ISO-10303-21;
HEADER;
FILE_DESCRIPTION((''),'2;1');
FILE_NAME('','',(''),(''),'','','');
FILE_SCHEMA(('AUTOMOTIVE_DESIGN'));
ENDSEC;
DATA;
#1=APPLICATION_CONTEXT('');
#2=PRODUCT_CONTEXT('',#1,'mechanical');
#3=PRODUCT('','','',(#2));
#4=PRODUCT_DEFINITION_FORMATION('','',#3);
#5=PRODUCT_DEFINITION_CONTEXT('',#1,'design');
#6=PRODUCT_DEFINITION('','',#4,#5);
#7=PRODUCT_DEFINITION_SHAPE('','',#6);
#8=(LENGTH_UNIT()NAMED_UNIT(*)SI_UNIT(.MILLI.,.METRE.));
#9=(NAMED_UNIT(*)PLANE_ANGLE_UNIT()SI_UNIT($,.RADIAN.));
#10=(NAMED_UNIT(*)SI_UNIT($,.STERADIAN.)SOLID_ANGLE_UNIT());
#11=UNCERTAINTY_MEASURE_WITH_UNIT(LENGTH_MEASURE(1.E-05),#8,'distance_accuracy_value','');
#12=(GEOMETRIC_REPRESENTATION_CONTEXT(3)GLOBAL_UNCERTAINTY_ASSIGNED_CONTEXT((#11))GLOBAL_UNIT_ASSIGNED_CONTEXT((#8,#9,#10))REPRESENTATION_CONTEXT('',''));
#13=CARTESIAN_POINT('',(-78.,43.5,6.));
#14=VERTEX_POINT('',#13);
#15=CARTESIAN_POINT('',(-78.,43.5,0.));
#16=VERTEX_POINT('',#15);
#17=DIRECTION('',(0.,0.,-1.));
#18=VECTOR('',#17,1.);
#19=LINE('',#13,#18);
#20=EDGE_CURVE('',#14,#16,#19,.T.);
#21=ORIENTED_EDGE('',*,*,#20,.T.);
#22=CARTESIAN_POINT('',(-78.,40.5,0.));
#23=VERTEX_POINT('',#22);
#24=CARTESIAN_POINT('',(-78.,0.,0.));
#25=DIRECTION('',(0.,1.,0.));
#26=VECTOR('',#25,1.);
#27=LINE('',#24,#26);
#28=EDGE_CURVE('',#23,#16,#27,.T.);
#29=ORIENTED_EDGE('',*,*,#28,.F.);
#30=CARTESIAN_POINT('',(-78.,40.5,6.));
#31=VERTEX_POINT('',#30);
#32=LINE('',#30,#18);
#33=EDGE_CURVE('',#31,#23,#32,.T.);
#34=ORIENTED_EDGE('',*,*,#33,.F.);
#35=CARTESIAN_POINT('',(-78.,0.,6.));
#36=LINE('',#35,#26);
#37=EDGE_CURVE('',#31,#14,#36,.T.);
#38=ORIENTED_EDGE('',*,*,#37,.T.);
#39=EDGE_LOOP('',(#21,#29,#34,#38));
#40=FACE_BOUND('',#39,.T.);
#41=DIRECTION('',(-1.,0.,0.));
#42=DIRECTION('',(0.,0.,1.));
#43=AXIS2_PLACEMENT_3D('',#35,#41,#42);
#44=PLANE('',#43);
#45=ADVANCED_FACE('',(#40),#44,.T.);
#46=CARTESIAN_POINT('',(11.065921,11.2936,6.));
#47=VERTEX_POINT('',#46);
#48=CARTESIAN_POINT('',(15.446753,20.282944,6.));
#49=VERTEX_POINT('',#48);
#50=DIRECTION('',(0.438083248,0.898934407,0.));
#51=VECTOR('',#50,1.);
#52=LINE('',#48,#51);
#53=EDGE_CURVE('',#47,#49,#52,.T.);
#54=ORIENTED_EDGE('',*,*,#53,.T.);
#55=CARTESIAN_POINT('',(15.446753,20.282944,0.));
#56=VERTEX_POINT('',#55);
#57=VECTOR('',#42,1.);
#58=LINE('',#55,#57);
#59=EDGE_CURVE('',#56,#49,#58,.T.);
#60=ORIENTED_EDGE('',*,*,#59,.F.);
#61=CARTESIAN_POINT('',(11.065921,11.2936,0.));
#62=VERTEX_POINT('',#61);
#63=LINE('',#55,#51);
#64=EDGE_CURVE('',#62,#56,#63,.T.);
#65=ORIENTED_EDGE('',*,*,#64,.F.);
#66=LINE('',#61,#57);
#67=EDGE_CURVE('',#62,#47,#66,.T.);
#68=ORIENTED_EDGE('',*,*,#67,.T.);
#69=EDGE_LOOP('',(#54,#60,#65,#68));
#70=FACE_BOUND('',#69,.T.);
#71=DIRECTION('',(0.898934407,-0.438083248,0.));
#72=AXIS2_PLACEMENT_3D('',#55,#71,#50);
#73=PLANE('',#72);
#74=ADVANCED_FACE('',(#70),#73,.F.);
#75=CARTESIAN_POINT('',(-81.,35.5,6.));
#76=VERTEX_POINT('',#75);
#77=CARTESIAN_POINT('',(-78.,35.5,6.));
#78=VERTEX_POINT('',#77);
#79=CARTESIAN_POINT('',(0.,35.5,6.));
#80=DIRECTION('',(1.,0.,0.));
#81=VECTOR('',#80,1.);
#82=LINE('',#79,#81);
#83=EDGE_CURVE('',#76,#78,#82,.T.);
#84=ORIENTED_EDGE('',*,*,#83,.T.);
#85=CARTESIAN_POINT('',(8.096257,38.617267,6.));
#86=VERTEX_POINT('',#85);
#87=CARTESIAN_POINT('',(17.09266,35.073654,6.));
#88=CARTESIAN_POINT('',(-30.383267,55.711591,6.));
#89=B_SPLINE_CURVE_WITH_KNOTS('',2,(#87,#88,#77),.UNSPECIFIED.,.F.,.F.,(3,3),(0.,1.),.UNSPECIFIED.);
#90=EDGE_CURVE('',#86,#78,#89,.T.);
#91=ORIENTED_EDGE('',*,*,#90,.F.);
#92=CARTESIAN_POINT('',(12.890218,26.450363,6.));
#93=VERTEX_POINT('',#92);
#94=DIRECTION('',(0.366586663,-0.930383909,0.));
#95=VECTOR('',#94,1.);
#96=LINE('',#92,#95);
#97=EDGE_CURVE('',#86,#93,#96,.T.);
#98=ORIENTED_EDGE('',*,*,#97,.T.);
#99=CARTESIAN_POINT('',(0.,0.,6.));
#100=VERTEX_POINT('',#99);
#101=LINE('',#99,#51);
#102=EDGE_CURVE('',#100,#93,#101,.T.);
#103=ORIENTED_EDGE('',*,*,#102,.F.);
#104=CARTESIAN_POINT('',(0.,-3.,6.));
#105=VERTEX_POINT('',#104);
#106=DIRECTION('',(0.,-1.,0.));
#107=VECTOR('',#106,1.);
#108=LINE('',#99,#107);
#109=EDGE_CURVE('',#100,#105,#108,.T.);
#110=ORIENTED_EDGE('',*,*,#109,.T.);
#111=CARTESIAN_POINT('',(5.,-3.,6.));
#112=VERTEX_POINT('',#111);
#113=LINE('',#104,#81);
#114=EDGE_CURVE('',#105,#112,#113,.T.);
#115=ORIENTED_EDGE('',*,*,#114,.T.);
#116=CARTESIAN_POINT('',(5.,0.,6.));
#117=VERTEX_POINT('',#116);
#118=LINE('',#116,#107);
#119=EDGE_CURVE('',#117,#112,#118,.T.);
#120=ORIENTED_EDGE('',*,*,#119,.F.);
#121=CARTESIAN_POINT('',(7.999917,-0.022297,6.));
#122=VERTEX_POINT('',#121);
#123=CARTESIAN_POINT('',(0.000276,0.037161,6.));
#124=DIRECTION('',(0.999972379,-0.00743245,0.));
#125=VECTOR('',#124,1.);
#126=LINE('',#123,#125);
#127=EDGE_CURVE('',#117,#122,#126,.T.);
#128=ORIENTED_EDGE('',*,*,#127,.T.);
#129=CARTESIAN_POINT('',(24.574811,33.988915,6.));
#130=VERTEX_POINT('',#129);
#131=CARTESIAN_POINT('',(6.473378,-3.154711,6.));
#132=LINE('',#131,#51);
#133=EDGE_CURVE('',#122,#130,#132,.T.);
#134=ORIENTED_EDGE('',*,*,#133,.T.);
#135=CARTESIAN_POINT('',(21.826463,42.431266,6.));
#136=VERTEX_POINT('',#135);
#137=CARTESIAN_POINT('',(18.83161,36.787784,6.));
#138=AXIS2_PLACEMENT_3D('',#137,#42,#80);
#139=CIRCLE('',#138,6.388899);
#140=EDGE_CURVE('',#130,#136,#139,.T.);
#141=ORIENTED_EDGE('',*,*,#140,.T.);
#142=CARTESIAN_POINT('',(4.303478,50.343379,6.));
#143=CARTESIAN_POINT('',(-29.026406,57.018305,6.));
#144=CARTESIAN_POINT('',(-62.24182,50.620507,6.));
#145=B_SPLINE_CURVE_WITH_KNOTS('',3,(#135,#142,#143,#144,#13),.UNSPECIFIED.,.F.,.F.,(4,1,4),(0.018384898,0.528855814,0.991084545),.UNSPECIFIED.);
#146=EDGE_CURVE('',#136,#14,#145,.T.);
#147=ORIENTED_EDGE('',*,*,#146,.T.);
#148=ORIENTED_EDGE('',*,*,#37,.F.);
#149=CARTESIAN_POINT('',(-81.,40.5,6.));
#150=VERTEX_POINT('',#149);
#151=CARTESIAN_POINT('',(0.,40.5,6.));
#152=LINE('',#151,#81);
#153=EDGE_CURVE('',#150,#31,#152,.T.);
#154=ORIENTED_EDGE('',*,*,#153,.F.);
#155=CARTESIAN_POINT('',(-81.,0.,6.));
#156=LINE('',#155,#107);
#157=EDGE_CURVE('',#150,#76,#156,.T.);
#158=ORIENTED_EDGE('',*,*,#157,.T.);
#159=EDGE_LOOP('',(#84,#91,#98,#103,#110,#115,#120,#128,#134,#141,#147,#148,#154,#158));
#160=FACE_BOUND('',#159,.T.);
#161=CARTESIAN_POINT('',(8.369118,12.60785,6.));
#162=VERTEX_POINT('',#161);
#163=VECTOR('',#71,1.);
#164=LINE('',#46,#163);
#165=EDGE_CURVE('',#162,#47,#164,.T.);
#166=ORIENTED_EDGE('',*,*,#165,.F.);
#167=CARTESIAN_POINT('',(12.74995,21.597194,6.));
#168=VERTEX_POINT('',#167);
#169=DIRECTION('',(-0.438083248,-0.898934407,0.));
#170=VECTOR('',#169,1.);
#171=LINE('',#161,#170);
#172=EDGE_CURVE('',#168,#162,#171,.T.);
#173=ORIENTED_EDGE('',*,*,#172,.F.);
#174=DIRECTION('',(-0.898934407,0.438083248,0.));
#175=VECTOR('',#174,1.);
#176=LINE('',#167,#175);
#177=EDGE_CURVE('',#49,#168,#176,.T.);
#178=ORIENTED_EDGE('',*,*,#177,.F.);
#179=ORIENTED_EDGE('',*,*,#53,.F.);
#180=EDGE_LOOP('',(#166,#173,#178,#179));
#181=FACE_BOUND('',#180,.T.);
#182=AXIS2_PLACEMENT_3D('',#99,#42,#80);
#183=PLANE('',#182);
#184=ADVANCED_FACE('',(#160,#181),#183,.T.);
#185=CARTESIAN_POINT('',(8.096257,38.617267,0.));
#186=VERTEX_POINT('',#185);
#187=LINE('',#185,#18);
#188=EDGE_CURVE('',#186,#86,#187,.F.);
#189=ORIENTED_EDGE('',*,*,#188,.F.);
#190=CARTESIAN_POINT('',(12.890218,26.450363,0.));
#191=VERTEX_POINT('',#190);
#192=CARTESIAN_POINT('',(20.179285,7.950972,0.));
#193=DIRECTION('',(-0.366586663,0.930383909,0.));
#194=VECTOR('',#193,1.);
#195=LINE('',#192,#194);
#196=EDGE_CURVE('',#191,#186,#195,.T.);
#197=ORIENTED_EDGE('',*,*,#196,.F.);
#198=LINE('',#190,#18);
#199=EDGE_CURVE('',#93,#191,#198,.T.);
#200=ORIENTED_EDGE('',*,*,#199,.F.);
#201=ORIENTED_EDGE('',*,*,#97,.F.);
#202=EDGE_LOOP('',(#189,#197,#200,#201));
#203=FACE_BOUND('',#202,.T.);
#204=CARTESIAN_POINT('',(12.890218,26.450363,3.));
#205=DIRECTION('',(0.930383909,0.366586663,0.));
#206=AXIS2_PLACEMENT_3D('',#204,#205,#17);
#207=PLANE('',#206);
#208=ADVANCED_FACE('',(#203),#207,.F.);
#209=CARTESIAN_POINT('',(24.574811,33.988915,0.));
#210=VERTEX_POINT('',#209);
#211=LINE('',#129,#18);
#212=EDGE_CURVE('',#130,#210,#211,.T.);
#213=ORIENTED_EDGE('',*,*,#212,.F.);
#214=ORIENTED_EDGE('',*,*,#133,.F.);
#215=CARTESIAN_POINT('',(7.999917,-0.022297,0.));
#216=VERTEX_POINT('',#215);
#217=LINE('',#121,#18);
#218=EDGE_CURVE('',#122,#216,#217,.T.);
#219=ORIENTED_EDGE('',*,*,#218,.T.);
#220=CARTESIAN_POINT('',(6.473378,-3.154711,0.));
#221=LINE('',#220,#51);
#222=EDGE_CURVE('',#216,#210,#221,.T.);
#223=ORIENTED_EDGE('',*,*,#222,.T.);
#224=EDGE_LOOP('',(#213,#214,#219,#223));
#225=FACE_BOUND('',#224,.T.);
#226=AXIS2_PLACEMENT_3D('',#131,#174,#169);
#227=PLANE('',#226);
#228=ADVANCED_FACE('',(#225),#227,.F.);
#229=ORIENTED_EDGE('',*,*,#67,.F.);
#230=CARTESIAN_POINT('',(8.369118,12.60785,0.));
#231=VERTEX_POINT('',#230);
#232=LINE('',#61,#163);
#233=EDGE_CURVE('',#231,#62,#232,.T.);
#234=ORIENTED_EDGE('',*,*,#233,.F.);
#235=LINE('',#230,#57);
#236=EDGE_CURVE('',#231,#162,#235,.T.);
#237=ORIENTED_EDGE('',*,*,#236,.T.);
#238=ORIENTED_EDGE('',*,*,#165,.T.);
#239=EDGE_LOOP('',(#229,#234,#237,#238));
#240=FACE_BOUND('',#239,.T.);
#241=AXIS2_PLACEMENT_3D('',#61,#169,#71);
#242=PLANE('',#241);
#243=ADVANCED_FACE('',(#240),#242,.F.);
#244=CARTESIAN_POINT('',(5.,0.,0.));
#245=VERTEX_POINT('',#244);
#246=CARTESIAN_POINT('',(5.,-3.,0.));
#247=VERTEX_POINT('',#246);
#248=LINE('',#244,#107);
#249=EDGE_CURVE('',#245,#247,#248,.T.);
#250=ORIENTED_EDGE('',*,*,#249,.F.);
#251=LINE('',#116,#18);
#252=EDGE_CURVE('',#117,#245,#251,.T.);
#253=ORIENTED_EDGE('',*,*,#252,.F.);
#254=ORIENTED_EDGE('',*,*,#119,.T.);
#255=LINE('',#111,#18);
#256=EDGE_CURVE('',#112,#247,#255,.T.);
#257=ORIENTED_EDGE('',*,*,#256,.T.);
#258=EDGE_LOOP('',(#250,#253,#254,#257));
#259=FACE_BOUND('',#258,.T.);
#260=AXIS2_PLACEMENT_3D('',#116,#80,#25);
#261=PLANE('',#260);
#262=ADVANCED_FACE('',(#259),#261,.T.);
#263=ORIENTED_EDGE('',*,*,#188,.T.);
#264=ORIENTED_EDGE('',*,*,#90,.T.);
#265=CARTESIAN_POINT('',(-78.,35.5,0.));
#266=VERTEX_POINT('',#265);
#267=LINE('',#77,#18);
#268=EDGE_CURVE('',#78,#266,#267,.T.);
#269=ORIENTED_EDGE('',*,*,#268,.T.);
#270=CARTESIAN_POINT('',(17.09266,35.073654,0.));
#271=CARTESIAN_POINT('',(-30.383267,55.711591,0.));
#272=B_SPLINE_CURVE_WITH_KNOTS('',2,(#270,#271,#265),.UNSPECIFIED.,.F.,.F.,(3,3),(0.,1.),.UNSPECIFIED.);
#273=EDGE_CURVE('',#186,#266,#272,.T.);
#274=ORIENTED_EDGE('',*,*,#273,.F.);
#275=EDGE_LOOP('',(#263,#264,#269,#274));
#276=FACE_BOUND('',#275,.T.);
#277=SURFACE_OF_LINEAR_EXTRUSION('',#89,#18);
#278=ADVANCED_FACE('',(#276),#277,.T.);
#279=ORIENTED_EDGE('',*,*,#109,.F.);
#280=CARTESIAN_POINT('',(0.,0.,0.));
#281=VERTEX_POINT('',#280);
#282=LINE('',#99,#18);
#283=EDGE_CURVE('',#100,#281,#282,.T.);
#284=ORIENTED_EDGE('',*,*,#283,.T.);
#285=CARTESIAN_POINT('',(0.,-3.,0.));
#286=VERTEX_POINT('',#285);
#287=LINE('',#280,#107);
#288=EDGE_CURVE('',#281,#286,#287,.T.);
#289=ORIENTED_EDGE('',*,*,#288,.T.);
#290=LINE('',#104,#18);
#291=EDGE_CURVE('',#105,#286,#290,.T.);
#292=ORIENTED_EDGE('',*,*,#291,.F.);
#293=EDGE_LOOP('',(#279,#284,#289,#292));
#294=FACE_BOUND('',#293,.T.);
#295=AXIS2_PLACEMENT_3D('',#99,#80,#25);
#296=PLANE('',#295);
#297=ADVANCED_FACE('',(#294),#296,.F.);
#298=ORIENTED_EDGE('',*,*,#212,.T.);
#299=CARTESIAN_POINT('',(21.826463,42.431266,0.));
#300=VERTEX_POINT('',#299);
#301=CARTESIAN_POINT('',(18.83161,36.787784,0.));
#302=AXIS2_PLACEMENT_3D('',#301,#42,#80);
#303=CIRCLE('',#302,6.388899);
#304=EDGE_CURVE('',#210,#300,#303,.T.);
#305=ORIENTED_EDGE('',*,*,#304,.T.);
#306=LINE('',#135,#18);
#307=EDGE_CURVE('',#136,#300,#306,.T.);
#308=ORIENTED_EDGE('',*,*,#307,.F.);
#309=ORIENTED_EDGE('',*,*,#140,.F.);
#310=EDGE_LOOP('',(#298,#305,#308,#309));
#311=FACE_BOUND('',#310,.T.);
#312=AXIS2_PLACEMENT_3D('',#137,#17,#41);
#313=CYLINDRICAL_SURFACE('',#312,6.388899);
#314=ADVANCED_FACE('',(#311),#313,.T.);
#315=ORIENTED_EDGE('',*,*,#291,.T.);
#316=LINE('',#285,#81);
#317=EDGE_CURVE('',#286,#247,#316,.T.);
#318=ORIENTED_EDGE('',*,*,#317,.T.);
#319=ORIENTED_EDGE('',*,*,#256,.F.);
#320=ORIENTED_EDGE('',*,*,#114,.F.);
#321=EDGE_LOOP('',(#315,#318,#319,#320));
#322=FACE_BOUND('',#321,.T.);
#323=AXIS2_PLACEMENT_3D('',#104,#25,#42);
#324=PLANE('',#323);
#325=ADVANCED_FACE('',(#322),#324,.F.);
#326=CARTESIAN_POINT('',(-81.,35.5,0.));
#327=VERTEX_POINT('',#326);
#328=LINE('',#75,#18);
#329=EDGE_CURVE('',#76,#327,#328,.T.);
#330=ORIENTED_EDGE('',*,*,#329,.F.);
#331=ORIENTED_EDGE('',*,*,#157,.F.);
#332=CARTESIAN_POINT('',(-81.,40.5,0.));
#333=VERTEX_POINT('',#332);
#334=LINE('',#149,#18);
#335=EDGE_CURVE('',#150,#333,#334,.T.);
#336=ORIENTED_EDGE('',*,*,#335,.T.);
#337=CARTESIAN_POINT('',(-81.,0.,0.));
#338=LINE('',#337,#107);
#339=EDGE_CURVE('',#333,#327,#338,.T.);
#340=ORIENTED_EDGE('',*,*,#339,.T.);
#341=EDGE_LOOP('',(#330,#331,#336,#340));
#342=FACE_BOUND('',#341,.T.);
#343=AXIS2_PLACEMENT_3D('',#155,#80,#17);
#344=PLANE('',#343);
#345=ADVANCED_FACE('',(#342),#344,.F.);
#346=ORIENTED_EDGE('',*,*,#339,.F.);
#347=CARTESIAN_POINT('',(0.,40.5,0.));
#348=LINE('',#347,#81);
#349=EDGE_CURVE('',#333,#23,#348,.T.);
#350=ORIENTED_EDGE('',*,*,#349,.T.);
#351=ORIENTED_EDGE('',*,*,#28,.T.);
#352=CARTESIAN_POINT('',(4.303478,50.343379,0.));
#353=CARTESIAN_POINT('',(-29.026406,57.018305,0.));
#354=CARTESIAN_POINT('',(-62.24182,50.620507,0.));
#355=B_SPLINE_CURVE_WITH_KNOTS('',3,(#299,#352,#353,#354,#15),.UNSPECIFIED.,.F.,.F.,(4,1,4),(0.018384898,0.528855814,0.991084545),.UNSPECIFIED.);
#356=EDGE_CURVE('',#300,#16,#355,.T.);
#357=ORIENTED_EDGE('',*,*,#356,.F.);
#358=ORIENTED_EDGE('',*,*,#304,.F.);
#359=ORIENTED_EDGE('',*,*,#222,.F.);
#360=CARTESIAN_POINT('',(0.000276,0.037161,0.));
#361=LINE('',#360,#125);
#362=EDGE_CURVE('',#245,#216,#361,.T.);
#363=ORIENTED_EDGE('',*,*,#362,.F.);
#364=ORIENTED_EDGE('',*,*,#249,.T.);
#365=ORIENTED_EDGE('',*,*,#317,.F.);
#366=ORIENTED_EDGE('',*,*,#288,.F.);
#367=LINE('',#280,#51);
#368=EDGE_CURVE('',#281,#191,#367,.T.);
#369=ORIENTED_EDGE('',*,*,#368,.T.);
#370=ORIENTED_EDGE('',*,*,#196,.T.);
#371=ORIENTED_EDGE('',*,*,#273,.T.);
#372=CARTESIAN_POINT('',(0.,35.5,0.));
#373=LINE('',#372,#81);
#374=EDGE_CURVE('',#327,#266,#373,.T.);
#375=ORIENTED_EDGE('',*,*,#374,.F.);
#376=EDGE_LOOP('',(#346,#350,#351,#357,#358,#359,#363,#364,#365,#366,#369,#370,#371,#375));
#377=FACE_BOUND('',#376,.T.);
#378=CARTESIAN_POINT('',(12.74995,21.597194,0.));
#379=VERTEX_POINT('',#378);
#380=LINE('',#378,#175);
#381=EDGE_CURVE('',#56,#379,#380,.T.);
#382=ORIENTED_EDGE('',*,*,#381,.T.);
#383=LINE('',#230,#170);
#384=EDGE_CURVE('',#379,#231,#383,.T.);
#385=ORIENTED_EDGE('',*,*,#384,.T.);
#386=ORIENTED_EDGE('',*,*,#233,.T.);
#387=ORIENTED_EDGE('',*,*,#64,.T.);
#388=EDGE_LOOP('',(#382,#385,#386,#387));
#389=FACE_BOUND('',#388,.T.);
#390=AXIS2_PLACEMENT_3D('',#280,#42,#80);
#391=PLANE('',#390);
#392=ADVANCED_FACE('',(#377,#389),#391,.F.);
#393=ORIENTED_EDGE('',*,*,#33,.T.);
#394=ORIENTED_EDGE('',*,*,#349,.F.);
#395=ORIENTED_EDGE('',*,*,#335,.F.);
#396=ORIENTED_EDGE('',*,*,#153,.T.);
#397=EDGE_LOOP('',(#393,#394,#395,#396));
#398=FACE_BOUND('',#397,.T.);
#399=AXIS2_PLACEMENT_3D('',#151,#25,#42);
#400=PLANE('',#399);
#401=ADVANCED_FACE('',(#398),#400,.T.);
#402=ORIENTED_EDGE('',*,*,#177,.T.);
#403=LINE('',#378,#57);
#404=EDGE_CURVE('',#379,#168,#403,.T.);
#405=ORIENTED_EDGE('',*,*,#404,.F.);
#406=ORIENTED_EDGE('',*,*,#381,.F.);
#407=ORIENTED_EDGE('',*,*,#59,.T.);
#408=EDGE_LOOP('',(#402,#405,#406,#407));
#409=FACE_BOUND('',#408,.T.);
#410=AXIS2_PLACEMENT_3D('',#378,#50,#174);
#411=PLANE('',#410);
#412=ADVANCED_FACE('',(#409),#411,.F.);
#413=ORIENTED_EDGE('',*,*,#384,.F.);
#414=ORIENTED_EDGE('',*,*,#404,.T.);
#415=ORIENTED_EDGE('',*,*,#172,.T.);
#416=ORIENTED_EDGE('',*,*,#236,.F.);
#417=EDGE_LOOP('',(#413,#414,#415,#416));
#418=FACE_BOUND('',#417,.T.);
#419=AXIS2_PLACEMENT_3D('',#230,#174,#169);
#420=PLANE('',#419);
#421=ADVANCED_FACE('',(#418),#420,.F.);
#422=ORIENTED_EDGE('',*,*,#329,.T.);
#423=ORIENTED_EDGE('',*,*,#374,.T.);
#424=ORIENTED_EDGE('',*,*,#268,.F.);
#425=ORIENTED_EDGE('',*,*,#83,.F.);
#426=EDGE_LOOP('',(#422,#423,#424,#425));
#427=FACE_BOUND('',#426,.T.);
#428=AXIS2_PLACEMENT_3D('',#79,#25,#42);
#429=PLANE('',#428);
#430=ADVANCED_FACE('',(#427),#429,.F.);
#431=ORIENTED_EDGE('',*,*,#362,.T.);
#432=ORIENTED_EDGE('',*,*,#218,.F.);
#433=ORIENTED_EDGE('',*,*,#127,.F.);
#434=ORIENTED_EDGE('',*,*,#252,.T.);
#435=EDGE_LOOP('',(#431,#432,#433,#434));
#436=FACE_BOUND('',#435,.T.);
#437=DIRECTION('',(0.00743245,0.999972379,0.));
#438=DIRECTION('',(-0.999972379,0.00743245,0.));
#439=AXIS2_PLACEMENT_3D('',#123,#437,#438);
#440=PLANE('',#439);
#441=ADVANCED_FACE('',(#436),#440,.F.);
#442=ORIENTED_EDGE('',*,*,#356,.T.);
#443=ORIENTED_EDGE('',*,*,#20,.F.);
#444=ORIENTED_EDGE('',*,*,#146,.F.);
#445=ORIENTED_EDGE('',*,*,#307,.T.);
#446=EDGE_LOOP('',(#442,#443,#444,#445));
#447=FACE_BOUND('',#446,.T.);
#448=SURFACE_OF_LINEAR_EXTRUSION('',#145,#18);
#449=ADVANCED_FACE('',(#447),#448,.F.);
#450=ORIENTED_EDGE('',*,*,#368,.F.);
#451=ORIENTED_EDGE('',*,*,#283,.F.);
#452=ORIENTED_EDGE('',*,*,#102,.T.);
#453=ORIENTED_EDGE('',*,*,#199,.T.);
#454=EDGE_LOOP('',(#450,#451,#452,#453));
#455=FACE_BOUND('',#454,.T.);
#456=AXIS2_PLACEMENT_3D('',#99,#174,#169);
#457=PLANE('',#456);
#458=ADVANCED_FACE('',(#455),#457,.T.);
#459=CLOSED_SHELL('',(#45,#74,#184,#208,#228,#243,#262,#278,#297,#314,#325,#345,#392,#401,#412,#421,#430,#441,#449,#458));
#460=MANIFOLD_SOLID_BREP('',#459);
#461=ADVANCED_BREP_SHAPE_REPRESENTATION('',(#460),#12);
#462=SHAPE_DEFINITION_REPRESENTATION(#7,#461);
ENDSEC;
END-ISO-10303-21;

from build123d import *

# Parameters (mm, degrees)
BOSS_EXTRUDE1_DEPTH = 6
CHAMFER1_DEPTH      = 6
CUT_EXTRUDE1_DEPTH  = 6


with BuildPart() as part:
    # Sketch1 → Boss-Extrude1 (new body)
    with BuildSketch(Plane.XY):
        with BuildLine():
            Line((5, -3), (5, 0))
            Line((5, 0), (7.999917137, -0.022297349))
            Line((7.999917137, -0.022297349), (24.574810766, 33.988914515))
            ThreePointArc((24.574810766, 33.988914515), (24.906699983, 38.765486885), (21.826463092, 42.431265759))
            add(Edge.make_bspline(
                [(21.826463092, 42.431265759), (4.303477857, 50.343378655), (-29.026405502, 57.018304793), (-62.241820335, 50.620507444), (-77.999999998, 43.5)],
                knots=[0.018384898, 0.018384898, 0.018384898, 0.018384898, 0.528855814, 0.991084545, 0.991084545, 0.991084545, 0.991084545], degree=3))
            Line((-77.999999998, 43.5), (-77.999999998, 40.5))
            Line((-77.999999998, 40.5), (-81, 40.5))
            Line((-81, 40.5), (-81, 35.5))
            Line((-81, 35.5), (-78, 35.5))
            add(Edge.make_bspline(
                [(17.092660216, 35.073654222), (-30.383266578, 55.711591107), (-78, 35.5)],
                knots=[0, 0, 0, 1, 1, 1], degree=2))
            Line((17.092660216, 35.073654222), (0, 0))
            Line((0, 0), (0, -3))
            Line((0, -3), (5, -3))
        make_face()
    extrude(amount=BOSS_EXTRUDE1_DEPTH)

    # Chamfer1: read off the stored shape, not the designer's step
    # Chamfer1 outline → Chamfer1 (add)
    with BuildSketch(Plane.XY):
        with BuildLine():
            Line((8.096256687, 38.617267247), (12.890218446, 26.45036284))
            Line((12.890218446, 26.45036284), (17.092660216, 35.073654222))
            add(Edge.make_bspline(
                [(17.092660216, 35.073654222), (12.595090284, 37.028762224), (8.096256687, 38.617267247)],
                knots=[0, 0, 0, 0.094733694, 0.094733694, 0.094733694], degree=2))
        make_face()
    extrude(amount=CHAMFER1_DEPTH)

    # Sketch4 → Cut-Extrude1 (cut)
    with BuildSketch(Plane.XY.offset(6)):
        Polygon((8.369117538, 12.607849604), (12.74995002, 21.597193671), (15.44675324, 20.282943927), (11.065920758, 11.293599859), align=None)
    extrude(amount=-CUT_EXTRUDE1_DEPTH, mode=Mode.SUBTRACT)


solid = part.part
